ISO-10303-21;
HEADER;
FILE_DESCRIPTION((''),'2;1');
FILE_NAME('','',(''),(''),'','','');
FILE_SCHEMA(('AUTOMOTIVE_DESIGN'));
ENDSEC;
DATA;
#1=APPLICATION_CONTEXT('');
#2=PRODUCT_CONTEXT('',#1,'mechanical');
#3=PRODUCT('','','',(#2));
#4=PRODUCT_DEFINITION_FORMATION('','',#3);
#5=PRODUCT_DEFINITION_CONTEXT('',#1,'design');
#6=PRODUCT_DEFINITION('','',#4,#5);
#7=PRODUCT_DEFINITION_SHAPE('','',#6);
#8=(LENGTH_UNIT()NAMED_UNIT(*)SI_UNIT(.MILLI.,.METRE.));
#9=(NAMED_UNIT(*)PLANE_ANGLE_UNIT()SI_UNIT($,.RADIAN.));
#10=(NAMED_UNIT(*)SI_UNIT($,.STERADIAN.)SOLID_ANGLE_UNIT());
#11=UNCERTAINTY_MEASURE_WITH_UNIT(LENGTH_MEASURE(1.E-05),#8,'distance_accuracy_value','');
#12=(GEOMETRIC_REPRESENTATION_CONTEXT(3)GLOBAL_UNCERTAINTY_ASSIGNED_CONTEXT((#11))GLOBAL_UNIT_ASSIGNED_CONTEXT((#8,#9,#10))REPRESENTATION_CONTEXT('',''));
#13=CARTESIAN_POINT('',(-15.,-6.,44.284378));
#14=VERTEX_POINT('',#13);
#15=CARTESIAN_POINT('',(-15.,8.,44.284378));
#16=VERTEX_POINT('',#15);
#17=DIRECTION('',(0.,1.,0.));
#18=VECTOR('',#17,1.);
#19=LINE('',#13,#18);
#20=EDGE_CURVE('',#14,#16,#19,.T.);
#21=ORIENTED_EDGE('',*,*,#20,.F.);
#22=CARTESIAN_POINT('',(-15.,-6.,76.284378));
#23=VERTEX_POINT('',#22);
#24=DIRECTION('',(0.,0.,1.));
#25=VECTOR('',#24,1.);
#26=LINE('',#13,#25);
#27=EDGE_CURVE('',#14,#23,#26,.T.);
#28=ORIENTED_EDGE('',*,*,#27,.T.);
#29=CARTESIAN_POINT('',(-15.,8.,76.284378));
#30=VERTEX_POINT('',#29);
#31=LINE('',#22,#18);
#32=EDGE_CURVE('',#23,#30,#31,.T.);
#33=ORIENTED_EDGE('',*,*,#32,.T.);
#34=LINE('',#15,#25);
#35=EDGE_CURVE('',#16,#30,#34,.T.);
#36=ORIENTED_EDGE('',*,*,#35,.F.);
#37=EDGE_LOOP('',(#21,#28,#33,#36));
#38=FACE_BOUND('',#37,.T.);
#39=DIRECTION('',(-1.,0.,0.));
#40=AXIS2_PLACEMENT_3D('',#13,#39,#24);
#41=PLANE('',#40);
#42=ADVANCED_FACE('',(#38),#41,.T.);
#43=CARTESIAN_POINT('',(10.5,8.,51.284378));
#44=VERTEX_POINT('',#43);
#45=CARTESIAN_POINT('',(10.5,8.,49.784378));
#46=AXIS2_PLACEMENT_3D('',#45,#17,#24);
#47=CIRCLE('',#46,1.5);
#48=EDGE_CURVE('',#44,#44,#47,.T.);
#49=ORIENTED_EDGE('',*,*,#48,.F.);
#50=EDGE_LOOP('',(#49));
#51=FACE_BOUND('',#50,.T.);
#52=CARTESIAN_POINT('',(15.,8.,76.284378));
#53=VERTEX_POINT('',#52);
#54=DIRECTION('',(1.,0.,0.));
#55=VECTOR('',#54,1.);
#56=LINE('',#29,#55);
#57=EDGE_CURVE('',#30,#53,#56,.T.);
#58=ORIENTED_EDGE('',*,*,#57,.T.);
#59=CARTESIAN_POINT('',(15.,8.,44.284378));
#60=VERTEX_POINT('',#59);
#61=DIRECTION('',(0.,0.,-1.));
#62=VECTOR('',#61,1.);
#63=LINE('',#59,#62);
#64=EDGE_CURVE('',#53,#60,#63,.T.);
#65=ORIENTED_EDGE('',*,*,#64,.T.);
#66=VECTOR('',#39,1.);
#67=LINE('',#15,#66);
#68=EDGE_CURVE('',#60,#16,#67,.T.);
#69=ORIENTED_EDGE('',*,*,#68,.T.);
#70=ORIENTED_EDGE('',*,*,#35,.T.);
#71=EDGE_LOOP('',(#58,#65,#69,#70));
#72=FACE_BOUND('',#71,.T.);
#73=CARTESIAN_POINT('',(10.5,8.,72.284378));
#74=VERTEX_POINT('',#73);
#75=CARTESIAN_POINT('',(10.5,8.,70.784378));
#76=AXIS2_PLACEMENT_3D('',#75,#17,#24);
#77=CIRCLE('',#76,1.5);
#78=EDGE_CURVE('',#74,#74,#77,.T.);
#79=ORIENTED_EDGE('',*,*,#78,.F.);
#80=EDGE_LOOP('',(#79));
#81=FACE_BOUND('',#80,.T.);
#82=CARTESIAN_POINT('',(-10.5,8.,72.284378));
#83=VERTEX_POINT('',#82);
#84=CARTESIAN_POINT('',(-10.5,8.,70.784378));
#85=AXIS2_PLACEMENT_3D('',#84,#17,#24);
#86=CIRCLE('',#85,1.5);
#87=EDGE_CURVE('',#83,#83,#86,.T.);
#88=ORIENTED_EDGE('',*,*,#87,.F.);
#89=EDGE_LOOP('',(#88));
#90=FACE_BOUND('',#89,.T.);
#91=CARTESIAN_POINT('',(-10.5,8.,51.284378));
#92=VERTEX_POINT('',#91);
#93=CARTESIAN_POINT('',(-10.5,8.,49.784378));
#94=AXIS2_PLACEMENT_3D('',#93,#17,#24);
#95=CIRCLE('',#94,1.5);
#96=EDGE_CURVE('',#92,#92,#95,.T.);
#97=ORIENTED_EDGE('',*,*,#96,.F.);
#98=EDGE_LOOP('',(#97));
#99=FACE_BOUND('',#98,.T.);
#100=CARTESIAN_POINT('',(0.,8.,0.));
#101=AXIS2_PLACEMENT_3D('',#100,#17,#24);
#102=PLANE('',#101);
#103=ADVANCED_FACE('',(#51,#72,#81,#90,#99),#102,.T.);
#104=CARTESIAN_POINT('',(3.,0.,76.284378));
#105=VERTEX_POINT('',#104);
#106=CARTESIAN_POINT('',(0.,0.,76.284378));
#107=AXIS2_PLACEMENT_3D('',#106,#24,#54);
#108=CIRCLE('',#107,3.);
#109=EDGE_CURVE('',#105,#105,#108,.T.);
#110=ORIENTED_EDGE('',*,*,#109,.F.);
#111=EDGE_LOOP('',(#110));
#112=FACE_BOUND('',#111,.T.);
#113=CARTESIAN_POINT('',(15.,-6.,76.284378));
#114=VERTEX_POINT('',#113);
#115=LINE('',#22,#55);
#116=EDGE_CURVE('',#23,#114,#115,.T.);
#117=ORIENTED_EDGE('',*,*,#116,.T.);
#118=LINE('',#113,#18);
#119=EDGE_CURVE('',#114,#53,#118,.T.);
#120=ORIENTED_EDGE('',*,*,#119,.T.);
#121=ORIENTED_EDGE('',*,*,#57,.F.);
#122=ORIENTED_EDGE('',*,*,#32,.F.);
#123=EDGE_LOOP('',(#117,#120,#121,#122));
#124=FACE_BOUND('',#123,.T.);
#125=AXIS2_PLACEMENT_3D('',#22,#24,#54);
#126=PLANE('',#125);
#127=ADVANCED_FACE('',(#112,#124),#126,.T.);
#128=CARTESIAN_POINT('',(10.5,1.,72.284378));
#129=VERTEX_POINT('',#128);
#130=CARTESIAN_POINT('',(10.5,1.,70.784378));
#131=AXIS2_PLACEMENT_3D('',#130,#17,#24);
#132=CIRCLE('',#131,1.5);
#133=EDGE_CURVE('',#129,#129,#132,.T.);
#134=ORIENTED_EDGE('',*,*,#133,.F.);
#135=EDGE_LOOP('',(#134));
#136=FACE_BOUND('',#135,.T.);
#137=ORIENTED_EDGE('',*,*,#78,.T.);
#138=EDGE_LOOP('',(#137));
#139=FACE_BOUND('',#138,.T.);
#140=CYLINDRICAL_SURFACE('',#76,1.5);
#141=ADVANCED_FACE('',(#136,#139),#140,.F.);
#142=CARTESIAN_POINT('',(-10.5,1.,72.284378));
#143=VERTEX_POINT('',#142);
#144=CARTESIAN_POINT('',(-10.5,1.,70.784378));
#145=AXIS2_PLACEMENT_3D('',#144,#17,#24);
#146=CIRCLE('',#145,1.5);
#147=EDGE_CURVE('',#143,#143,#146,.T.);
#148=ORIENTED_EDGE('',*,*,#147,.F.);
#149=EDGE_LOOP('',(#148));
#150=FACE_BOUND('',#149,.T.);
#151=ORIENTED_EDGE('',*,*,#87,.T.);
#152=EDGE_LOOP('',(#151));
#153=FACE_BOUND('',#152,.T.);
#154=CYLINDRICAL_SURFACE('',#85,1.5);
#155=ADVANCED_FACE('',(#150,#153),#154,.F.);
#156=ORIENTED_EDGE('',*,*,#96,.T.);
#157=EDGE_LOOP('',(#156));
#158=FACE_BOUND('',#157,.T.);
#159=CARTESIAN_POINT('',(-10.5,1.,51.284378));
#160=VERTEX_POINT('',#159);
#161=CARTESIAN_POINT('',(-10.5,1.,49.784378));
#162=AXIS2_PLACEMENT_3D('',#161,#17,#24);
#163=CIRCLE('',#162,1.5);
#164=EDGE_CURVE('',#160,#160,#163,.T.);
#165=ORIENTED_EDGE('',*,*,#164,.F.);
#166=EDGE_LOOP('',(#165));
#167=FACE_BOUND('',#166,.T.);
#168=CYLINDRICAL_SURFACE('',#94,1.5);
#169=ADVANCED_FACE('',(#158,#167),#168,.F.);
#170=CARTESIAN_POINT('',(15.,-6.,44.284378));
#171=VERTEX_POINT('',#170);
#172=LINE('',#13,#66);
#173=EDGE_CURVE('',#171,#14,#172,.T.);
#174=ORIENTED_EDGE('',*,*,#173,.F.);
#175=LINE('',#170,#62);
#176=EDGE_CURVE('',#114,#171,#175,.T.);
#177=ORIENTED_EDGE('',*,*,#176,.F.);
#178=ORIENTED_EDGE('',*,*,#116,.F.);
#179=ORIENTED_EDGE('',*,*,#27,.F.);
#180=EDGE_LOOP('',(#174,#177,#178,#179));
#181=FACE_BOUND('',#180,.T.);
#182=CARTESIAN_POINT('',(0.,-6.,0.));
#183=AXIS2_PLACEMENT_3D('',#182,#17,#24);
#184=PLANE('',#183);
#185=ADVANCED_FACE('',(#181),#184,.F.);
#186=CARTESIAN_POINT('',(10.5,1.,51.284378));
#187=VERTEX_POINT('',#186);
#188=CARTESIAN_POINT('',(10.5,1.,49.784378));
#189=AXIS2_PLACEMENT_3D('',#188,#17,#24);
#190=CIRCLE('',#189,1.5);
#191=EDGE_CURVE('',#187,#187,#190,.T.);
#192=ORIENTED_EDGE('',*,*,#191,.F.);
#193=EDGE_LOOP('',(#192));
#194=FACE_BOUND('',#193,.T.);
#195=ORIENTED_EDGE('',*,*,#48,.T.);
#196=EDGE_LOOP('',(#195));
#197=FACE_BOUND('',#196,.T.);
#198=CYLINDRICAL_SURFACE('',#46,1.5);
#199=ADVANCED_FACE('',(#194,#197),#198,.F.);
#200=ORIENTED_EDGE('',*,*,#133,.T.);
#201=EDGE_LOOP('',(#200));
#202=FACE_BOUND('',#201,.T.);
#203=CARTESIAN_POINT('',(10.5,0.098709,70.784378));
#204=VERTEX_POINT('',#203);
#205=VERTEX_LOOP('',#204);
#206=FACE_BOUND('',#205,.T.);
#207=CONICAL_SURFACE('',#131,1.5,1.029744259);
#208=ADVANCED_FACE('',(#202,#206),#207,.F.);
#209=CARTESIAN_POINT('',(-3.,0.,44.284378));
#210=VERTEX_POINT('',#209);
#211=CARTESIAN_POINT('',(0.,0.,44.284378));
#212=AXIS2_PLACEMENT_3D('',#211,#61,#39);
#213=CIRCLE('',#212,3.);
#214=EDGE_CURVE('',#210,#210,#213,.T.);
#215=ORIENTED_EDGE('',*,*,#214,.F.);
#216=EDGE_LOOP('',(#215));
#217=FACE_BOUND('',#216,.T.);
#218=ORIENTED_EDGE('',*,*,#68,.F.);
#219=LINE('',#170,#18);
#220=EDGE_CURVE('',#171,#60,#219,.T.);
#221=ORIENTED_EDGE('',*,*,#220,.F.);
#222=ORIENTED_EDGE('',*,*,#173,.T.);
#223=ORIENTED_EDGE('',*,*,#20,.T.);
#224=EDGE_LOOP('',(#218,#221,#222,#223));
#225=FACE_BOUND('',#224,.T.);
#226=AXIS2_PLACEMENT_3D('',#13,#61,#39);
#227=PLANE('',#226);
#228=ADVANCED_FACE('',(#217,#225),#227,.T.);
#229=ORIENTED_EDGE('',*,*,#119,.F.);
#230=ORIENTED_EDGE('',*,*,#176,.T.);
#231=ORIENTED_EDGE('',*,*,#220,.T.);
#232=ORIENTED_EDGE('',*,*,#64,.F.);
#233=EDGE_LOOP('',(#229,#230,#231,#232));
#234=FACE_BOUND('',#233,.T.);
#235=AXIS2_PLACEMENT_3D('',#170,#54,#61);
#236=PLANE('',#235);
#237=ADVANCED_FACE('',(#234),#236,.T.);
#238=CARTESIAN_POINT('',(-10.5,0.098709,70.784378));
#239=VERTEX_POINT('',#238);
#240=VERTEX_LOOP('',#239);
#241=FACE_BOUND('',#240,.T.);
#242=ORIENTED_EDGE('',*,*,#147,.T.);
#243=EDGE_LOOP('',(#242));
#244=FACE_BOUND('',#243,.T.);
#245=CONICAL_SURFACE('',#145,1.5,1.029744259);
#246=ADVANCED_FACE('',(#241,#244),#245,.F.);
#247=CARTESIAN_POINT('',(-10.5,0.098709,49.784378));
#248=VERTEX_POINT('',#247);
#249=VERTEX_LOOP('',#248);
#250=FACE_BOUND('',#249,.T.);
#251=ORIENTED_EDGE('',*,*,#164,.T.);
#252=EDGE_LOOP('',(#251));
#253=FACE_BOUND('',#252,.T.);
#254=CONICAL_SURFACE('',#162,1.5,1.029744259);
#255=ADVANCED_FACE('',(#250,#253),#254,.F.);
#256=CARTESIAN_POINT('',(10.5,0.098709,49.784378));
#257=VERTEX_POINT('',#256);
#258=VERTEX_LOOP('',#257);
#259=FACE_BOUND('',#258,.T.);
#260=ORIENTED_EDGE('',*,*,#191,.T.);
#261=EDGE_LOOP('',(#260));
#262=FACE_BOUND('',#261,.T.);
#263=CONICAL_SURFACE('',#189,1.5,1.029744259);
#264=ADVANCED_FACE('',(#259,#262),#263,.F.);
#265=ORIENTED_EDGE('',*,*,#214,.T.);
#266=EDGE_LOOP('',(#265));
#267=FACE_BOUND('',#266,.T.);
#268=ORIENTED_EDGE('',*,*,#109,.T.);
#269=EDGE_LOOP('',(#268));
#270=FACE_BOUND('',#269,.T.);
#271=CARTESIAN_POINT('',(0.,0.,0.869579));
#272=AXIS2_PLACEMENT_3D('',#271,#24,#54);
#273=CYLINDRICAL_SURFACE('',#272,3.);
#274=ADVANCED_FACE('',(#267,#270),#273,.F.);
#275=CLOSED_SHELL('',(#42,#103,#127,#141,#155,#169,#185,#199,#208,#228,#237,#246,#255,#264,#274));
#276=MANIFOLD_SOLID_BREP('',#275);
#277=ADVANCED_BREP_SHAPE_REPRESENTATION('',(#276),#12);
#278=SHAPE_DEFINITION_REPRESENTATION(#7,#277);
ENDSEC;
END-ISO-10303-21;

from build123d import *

# Parameters (mm, degrees)
SKETCH1_W                = 30
SKETCH1_H                = 32
BOSS_EXTRUDE1_DEPTH      = 14
CAVITY1_START            = 44.284378121
CAVITY1_OUTLINE_R        = 3
CAVITY1_DEPTH            = 32
M3_CLEARANCE_HOLE1_D     = 3
M3_CLEARANCE_HOLE1_DEPTH = 7
M3_CLEARANCE_HOLE1_TIP   = 0.901290929


# Read off the part's stored shape, not the designer's step: Cavity1
with BuildPart() as part:
    # Sketch1 → Boss-Extrude1 (new body)
    with BuildSketch(Plane(origin=(0, 8, 0), x_dir=(1, 0, 0), z_dir=(0, 1, 0))):
        with Locations((0, -60.284378121)):
            Rectangle(SKETCH1_W, SKETCH1_H)
    extrude(amount=-BOSS_EXTRUDE1_DEPTH)

    # Cavity1 outline → Cavity1 (cut)
    with BuildSketch(Plane.XY.offset(CAVITY1_START)):
        Circle(CAVITY1_OUTLINE_R)
    extrude(amount=CAVITY1_DEPTH, mode=Mode.SUBTRACT)

    # M3 Clearance Hole1
    with Locations(Plane(origin=(0, 8, 0), x_dir=(1, 0, 0), z_dir=(0, 1, 0))):
        with Locations((10.5, -49.784378121), (-10.5, -49.784378121), (-10.5, -70.784378121), (10.5, -70.784378121)):
            Hole(M3_CLEARANCE_HOLE1_D / 2, depth=M3_CLEARANCE_HOLE1_DEPTH)
            with Locations((0, 0, -(M3_CLEARANCE_HOLE1_DEPTH + M3_CLEARANCE_HOLE1_TIP / 2))):  # 118° drill point
                Cone(0, M3_CLEARANCE_HOLE1_D / 2, M3_CLEARANCE_HOLE1_TIP, mode=Mode.SUBTRACT)


solid = part.part
